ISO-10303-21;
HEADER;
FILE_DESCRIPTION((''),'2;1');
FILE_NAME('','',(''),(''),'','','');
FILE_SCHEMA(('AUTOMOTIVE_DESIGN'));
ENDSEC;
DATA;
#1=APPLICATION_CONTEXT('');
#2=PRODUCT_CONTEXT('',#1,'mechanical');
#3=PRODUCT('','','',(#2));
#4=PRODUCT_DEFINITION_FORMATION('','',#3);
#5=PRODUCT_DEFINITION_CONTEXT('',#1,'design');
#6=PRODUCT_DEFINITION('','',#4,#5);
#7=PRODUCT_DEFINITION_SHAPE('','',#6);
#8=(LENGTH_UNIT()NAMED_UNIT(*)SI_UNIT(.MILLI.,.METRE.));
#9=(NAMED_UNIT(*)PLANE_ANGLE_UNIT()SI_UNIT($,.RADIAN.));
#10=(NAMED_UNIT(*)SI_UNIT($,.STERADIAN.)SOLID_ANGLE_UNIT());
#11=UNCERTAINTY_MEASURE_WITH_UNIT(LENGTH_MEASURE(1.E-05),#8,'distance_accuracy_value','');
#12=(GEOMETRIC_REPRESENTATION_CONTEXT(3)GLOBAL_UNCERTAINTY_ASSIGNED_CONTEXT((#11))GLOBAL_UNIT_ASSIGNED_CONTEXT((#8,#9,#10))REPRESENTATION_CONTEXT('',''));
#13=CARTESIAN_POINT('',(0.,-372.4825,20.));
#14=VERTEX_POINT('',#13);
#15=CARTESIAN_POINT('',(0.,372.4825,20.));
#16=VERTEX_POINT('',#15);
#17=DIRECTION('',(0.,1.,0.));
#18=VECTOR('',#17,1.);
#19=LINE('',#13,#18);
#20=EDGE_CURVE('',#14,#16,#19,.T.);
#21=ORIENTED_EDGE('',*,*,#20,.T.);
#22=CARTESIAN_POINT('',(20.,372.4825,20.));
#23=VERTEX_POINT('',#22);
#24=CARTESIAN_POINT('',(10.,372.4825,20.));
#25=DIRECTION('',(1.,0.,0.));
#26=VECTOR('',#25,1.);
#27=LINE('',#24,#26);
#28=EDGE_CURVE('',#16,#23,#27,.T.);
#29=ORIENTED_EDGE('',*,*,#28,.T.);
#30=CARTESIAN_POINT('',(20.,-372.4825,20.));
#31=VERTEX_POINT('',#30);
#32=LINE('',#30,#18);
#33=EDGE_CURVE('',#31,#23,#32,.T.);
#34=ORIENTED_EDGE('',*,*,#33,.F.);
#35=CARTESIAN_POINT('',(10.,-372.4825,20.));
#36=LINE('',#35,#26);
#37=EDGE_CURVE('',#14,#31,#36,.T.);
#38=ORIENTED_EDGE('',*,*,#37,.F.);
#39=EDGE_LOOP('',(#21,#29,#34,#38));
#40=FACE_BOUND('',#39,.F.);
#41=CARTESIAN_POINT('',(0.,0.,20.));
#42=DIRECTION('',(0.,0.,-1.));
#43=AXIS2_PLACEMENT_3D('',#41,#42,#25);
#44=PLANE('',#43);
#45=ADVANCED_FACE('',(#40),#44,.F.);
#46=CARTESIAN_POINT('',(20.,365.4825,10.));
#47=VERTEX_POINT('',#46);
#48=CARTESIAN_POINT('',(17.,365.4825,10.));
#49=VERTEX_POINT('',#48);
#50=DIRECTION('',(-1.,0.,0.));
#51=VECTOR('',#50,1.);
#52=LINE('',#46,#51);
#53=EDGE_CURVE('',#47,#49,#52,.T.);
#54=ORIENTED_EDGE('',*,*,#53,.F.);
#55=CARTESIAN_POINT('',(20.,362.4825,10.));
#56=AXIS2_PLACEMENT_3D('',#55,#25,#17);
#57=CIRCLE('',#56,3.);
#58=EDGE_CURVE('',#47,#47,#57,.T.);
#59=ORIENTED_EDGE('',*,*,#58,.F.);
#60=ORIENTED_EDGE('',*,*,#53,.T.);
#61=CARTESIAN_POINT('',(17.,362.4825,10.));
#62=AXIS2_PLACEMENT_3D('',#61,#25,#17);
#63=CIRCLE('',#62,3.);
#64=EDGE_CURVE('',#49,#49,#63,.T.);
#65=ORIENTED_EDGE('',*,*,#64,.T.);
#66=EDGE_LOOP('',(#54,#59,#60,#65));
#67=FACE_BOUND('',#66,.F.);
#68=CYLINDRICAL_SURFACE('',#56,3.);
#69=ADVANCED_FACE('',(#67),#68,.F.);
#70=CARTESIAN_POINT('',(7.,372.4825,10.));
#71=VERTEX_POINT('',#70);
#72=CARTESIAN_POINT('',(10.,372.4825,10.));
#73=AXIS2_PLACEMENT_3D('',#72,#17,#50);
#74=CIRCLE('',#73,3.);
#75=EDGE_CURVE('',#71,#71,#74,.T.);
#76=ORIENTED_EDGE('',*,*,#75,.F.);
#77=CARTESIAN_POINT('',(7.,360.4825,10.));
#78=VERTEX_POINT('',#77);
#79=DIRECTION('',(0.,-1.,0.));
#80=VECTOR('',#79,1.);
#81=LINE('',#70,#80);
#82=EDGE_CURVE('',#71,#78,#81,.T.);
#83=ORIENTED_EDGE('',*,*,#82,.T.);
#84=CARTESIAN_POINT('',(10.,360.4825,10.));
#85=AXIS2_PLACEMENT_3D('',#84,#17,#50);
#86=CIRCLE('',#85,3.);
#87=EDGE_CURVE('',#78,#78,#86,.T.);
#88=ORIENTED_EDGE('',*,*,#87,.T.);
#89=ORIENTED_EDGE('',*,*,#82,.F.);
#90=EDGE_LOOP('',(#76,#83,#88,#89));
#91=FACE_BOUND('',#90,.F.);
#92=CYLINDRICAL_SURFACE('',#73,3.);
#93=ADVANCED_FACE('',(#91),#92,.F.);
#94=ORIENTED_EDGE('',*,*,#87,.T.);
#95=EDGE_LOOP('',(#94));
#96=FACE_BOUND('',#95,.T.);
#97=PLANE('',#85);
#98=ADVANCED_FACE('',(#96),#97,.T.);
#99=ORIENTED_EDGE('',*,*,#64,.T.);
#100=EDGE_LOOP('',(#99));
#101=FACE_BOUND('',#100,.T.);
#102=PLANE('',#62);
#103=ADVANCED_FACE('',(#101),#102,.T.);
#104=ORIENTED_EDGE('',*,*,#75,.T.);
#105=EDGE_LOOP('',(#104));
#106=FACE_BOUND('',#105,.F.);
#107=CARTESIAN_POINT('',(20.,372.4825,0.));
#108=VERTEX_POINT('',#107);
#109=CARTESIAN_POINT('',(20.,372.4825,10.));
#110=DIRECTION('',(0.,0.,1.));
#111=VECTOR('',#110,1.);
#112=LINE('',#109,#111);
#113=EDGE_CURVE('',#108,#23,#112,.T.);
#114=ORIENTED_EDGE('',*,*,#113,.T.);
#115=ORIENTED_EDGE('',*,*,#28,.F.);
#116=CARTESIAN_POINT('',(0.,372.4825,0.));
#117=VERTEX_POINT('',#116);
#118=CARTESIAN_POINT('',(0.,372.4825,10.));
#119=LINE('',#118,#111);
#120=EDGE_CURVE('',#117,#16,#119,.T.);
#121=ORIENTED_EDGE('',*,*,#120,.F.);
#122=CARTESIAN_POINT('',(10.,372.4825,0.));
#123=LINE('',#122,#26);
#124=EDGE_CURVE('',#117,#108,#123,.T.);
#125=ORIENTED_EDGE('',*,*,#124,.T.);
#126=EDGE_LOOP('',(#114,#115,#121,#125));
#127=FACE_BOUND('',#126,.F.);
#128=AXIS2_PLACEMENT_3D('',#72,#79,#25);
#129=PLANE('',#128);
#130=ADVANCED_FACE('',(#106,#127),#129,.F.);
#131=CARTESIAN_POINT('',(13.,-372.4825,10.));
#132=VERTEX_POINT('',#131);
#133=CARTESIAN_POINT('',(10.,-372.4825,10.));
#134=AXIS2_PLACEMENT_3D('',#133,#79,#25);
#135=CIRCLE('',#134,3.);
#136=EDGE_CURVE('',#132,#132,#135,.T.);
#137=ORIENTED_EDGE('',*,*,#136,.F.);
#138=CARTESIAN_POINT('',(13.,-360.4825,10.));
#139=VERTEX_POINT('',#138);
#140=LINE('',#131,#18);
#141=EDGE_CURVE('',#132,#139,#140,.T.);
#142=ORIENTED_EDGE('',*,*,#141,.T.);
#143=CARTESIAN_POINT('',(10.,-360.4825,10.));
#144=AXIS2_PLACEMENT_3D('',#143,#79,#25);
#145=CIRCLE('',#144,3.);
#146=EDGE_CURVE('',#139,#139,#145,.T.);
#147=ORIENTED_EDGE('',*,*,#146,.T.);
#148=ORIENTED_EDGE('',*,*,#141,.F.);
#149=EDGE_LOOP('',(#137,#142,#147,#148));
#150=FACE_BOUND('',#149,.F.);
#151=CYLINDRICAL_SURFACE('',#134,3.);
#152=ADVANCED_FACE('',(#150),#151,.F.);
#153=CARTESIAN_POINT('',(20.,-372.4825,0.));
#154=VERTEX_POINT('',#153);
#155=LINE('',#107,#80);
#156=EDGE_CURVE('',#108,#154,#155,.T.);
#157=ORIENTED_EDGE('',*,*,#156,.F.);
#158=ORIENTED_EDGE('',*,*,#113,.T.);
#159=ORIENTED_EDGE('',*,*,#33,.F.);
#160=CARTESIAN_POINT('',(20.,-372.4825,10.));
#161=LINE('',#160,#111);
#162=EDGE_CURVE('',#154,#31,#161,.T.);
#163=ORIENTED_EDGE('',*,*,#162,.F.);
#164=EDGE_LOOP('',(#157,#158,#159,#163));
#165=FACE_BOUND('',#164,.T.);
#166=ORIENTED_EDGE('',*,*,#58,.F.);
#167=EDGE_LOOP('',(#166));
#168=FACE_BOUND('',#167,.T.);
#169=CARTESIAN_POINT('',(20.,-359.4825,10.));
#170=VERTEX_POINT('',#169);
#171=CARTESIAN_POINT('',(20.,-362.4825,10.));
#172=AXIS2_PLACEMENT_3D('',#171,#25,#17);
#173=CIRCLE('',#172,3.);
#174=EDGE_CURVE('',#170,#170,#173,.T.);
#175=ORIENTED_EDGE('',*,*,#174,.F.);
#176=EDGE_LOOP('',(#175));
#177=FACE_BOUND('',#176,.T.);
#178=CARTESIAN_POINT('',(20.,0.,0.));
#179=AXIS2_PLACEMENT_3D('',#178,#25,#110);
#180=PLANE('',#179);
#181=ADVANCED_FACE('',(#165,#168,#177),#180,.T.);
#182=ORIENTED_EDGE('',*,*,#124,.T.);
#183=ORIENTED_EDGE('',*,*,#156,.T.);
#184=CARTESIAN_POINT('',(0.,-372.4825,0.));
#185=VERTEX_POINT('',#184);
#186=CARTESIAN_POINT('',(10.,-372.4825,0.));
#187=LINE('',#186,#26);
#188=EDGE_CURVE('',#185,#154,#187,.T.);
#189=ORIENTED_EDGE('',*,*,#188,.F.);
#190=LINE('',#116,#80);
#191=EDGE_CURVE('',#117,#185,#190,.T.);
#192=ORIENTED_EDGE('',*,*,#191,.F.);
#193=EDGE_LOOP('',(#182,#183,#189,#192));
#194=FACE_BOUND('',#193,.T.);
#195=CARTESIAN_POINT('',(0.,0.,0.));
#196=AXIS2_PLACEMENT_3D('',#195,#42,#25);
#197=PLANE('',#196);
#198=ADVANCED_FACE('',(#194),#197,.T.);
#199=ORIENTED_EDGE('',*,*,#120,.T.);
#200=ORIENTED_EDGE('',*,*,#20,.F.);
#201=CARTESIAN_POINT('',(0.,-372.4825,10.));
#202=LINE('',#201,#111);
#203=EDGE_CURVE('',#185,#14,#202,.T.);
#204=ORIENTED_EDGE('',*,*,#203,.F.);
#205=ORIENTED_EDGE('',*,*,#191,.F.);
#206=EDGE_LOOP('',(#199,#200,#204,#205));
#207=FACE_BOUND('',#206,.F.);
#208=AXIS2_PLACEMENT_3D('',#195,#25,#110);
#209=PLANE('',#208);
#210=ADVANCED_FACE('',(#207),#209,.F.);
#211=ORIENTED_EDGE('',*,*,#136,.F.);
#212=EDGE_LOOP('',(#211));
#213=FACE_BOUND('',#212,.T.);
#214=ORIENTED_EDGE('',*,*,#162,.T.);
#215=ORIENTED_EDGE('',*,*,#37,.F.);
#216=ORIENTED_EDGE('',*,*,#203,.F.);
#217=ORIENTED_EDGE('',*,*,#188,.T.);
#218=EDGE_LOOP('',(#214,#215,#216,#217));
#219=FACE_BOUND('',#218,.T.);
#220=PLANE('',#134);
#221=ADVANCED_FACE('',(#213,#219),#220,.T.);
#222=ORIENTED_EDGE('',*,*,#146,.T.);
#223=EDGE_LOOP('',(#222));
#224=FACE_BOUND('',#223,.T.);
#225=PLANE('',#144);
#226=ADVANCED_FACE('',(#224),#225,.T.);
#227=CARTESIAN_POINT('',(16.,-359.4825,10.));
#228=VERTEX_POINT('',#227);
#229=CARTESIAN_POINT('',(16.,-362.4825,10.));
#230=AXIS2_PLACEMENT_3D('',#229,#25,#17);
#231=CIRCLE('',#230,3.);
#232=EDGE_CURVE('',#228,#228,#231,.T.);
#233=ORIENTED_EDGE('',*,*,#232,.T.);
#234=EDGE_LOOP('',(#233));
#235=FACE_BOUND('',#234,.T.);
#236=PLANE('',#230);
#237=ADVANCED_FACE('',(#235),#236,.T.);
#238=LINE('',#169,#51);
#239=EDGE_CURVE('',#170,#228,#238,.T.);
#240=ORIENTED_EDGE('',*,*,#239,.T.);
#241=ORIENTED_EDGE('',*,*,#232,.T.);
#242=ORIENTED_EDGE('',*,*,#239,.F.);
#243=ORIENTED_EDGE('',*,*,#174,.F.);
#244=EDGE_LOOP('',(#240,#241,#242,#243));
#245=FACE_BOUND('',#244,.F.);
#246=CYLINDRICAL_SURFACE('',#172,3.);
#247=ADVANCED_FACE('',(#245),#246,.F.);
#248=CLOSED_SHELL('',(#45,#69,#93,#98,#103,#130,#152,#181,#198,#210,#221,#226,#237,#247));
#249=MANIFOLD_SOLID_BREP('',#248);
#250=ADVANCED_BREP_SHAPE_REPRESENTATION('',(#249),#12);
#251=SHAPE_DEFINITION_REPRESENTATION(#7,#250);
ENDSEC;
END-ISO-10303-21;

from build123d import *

# Parameters (mm, degrees)
F0_W     = 20
F0_H     = 20
F1_DEPTH = 372.4825
F2_R     = 3
F3_DEPTH = 12
F4_R     = 3
F5_DEPTH = 12
F6_R     = 3
F7_DEPTH = 3
F8_R     = 3
F9_DEPTH = 4


with BuildPart() as f1:
    # F0 (on Front) → F1 (new body, symmetric)
    with BuildSketch(Plane.XZ):
        with Locations((10, 10)):
            Rectangle(F0_W, F0_H)
    extrude(amount=F1_DEPTH, both=True)

    # F2 (on face) → F3 (cut)
    with BuildSketch(Plane.XZ.offset(372.4825)):
        with Locations((10, 10)):
            Circle(F2_R)
    extrude(amount=-F3_DEPTH, mode=Mode.SUBTRACT)

    # F4 (on face) → F5 (cut)
    with BuildSketch(Plane(origin=(0, 372.4825, 0), x_dir=(-1, 0, 0), z_dir=(0, 1, 0))):
        with Locations((-10, 10)):
            Circle(F4_R)
    extrude(amount=-F5_DEPTH, mode=Mode.SUBTRACT)

    # F6 (on face) → F7 (cut)
    with BuildSketch(Plane.YZ.offset(20)):
        with Locations((362.4825, 10)):
            Circle(F6_R)
    extrude(amount=-F7_DEPTH, mode=Mode.SUBTRACT)

    # F8 (on face) → F9 (cut)
    with BuildSketch(Plane.YZ.offset(20)):
        with Locations((-362.4825, 10)):
            Circle(F8_R)
    extrude(amount=-F9_DEPTH, mode=Mode.SUBTRACT)


solid = f1.part
